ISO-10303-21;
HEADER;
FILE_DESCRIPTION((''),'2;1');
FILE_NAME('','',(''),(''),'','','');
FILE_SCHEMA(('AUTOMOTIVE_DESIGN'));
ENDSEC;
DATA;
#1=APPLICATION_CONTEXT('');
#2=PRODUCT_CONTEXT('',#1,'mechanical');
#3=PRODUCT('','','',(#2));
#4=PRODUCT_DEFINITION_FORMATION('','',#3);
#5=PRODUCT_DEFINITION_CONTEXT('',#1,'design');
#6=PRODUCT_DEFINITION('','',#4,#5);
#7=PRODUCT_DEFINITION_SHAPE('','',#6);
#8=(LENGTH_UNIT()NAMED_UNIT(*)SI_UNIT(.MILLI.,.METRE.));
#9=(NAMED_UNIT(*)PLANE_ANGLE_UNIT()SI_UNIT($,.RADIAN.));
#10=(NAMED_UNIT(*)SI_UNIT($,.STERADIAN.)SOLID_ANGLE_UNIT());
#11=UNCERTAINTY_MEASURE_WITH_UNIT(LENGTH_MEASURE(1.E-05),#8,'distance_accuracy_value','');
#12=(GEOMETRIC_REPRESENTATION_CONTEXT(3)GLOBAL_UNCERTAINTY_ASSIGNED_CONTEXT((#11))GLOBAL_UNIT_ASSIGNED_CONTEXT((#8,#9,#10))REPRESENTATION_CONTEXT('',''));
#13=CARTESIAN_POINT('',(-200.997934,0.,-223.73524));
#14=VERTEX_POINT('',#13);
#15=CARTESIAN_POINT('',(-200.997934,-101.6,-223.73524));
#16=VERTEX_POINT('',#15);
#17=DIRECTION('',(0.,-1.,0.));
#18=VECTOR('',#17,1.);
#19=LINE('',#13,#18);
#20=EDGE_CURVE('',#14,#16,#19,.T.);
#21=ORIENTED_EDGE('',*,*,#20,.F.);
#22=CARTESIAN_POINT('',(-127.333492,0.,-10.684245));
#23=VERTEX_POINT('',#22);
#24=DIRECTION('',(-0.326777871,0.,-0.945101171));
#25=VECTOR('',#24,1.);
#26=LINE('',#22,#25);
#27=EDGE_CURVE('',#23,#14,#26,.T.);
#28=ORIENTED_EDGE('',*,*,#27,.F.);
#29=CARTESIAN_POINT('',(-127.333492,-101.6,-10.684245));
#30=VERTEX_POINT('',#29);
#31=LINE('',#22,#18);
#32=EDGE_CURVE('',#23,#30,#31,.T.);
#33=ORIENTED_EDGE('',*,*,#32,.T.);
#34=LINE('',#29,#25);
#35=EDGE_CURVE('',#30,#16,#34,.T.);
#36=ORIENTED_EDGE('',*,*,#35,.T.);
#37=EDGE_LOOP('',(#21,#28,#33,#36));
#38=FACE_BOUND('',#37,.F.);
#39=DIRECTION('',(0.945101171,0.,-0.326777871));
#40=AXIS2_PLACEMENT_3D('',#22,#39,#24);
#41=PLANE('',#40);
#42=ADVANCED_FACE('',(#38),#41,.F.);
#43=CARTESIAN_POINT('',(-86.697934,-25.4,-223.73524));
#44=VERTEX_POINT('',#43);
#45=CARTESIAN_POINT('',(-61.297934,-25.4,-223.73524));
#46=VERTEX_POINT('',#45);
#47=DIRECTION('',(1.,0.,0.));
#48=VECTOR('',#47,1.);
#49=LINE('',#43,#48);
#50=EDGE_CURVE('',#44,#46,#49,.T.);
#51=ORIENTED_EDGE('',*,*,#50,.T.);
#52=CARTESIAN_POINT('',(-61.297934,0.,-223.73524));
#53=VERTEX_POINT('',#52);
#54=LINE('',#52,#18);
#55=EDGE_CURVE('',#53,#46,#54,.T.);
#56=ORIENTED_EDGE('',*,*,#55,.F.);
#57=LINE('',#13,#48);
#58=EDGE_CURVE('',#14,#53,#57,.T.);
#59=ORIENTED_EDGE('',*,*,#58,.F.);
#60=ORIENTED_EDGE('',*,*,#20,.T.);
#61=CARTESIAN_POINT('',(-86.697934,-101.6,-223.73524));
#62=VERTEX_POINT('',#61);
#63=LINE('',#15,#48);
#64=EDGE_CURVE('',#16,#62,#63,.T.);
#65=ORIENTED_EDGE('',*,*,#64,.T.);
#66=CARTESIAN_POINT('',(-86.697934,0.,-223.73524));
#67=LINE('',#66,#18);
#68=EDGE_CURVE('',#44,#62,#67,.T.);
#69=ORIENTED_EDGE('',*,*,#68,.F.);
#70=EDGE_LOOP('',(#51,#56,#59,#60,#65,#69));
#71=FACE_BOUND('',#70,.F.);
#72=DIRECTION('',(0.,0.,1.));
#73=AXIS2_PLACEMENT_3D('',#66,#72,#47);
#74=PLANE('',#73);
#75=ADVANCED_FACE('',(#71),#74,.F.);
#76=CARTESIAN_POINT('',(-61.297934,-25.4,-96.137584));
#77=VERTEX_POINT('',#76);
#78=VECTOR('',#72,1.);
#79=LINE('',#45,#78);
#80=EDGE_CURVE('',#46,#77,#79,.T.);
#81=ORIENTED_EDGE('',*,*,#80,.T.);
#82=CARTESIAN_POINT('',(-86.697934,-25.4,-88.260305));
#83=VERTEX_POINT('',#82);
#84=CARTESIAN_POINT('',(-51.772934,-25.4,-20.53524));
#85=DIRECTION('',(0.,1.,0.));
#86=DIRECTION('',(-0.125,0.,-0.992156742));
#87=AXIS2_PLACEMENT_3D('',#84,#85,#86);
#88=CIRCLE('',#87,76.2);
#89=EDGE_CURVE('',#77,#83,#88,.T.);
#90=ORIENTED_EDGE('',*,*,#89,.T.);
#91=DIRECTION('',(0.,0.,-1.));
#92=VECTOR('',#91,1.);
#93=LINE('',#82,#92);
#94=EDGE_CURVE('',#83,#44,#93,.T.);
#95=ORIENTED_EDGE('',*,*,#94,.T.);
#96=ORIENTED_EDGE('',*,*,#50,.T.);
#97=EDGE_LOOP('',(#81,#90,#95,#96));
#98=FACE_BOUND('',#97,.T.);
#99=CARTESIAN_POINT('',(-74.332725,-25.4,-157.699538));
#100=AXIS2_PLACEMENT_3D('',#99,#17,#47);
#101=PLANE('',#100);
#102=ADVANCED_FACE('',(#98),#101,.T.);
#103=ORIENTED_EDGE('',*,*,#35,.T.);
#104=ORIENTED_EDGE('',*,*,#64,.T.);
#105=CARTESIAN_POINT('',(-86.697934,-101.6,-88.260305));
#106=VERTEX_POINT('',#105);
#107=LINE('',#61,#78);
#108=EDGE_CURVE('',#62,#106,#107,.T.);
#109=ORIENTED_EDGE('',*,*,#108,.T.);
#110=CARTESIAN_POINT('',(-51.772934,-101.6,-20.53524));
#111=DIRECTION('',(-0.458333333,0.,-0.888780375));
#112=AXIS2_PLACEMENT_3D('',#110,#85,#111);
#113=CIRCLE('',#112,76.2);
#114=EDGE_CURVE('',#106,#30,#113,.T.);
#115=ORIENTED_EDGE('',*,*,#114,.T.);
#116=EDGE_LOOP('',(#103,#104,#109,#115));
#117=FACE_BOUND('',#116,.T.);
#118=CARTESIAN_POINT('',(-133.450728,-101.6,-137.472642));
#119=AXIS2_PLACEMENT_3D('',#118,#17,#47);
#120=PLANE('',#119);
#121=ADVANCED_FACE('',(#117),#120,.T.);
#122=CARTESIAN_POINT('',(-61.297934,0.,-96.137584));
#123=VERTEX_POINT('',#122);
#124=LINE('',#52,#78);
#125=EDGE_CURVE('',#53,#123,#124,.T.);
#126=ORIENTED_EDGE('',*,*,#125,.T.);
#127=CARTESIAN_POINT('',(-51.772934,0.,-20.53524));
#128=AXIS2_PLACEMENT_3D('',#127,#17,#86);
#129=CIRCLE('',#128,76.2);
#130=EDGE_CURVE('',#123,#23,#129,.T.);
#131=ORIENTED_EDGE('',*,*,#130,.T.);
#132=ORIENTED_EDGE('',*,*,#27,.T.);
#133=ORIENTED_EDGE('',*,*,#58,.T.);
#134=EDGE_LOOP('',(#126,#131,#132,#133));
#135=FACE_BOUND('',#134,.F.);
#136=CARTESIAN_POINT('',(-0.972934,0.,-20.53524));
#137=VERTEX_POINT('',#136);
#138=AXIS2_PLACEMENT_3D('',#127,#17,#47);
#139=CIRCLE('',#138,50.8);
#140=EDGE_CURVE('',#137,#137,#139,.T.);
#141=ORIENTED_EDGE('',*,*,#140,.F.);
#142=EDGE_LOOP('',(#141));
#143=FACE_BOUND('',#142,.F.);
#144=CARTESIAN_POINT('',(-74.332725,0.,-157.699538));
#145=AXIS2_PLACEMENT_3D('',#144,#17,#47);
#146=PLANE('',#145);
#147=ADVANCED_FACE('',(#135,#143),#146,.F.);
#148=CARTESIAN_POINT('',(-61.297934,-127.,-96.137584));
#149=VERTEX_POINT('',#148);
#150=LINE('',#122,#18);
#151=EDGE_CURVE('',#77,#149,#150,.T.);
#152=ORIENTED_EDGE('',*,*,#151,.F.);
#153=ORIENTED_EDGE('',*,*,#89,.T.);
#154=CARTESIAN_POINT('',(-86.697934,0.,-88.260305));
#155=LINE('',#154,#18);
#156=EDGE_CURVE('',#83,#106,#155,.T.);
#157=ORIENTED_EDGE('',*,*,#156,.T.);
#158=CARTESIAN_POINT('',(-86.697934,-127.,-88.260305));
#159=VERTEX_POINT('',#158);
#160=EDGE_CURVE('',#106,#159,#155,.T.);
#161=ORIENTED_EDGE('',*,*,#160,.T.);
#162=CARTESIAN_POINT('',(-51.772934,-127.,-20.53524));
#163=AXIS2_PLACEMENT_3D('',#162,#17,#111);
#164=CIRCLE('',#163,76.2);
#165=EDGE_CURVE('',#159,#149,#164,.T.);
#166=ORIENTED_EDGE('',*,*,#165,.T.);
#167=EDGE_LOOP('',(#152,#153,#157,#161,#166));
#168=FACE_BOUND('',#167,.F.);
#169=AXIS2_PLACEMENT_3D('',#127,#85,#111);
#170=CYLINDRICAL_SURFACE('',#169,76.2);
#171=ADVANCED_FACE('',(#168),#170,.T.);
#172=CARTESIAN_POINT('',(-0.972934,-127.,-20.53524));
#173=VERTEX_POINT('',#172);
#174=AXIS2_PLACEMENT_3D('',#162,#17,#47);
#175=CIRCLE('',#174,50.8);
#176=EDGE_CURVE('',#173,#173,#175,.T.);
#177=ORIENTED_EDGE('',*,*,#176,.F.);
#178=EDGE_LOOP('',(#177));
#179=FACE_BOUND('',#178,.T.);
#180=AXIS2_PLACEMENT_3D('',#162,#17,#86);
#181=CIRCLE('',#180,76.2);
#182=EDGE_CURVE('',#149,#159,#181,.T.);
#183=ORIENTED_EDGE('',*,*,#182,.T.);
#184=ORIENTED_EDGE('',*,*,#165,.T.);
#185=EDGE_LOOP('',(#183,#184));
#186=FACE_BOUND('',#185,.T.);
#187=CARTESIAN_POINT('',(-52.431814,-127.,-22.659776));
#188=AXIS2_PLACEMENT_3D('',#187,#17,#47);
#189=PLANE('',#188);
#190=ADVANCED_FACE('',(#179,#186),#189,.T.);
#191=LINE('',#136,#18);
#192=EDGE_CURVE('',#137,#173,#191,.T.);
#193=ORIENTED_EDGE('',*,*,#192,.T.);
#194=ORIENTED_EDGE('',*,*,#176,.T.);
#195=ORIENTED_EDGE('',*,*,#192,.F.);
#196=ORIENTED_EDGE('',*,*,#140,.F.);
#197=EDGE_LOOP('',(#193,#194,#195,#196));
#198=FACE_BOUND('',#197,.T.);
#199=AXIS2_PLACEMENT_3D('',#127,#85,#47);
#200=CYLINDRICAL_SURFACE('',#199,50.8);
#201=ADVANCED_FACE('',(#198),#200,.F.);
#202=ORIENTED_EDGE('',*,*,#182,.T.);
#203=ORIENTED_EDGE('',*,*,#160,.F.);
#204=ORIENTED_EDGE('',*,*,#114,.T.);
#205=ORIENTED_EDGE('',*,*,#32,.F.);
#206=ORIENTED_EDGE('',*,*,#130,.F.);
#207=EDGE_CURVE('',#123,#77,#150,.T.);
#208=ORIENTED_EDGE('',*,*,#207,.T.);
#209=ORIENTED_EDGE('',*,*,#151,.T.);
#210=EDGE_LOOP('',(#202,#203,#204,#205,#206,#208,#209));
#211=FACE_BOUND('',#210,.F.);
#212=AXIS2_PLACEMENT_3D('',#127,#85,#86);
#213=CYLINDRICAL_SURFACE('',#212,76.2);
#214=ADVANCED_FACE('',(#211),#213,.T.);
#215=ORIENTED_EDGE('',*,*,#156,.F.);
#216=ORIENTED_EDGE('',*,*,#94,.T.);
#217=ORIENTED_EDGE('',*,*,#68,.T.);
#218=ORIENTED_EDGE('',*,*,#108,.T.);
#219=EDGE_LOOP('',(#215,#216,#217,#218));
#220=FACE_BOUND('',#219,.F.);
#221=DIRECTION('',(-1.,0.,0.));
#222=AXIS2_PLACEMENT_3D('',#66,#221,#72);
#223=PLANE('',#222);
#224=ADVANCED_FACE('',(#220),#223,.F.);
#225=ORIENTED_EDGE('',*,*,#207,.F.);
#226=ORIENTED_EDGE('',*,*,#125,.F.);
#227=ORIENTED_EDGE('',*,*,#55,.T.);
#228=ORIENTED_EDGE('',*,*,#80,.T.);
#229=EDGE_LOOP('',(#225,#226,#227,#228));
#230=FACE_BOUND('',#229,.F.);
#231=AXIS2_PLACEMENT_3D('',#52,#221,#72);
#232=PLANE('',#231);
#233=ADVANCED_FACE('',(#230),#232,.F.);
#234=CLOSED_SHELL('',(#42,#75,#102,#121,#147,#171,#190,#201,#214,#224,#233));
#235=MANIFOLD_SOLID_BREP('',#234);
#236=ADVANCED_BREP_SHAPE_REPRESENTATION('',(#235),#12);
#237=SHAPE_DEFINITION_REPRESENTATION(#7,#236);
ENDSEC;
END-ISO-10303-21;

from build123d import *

# Parameters (mm, degrees)
F0_R     = 50.8
F1_DEPTH = 127
F2_DEPTH = 101.6
F4_DEPTH = 25.4


# Not quite as in the source:
# - a feature of the source that left no trace in its solid (it failed there, or was rolled back) is left out


with BuildPart() as f1:
    # F0 (on Front) → F1 (new body)
    with BuildSketch(Plane.XZ):
        with BuildLine():
            ThreePointArc((-61.2979337454, -96.1375838272), (-1.3713712696, -77.6852401135), (24.4270662546, -20.5352401135))
            ThreePointArc((24.4270662546, -20.5352401135), (24.2670376819, -15.5993769332), (23.7876241198, -10.6842454887))
            ThreePointArc((23.7876241198, -10.6842454887), (-51.7729337454, 55.6647598865), (-127.3334916106, -10.6842454887))
            ThreePointArc((-127.3334916106, -10.6842454887), (-119.2731253406, -55.8929003106), (-86.6979337454, -88.260304713))
            ThreePointArc((-86.6979337454, -88.260304713), (-74.3442320368, -93.3155705156), (-61.2979337454, -96.1375838272))
        make_face()
        with Locations((-51.7729337454, -20.5352401135)):
            Circle(F0_R, mode=Mode.SUBTRACT)
    extrude(amount=F1_DEPTH)

    # F0 (on Front) → F2 (join)
    with BuildSketch(Plane.XZ):
        with BuildLine():
            ThreePointArc((-86.6979337454, -88.260304713), (-119.2731253406, -55.8929003106), (-127.3334916106, -10.6842454887))
            Line((-127.3334916106, -10.6842454887), (-200.9979337454, -223.7352401135))
            Line((-200.9979337454, -223.7352401135), (-86.6979337454, -223.7352401135))
            Line((-86.6979337454, -223.7352401135), (-86.6979337454, -88.260304713))
        make_face()
    extrude(amount=F2_DEPTH)

    # F0 (on Front) → F4 (join)
    with BuildSketch(Plane.XZ):
        with BuildLine():
            Line((-61.2979337454, -223.7352401135), (-61.2979337454, -96.1375838272))
            ThreePointArc((-61.2979337454, -96.1375838272), (-74.3442320368, -93.3155705156), (-86.6979337454, -88.260304713))
            Line((-86.6979337454, -88.260304713), (-86.6979337454, -223.7352401135))
            Line((-86.6979337454, -223.7352401135), (-61.2979337454, -223.7352401135))
        make_face()
    extrude(amount=F4_DEPTH)


solid = f1.part
